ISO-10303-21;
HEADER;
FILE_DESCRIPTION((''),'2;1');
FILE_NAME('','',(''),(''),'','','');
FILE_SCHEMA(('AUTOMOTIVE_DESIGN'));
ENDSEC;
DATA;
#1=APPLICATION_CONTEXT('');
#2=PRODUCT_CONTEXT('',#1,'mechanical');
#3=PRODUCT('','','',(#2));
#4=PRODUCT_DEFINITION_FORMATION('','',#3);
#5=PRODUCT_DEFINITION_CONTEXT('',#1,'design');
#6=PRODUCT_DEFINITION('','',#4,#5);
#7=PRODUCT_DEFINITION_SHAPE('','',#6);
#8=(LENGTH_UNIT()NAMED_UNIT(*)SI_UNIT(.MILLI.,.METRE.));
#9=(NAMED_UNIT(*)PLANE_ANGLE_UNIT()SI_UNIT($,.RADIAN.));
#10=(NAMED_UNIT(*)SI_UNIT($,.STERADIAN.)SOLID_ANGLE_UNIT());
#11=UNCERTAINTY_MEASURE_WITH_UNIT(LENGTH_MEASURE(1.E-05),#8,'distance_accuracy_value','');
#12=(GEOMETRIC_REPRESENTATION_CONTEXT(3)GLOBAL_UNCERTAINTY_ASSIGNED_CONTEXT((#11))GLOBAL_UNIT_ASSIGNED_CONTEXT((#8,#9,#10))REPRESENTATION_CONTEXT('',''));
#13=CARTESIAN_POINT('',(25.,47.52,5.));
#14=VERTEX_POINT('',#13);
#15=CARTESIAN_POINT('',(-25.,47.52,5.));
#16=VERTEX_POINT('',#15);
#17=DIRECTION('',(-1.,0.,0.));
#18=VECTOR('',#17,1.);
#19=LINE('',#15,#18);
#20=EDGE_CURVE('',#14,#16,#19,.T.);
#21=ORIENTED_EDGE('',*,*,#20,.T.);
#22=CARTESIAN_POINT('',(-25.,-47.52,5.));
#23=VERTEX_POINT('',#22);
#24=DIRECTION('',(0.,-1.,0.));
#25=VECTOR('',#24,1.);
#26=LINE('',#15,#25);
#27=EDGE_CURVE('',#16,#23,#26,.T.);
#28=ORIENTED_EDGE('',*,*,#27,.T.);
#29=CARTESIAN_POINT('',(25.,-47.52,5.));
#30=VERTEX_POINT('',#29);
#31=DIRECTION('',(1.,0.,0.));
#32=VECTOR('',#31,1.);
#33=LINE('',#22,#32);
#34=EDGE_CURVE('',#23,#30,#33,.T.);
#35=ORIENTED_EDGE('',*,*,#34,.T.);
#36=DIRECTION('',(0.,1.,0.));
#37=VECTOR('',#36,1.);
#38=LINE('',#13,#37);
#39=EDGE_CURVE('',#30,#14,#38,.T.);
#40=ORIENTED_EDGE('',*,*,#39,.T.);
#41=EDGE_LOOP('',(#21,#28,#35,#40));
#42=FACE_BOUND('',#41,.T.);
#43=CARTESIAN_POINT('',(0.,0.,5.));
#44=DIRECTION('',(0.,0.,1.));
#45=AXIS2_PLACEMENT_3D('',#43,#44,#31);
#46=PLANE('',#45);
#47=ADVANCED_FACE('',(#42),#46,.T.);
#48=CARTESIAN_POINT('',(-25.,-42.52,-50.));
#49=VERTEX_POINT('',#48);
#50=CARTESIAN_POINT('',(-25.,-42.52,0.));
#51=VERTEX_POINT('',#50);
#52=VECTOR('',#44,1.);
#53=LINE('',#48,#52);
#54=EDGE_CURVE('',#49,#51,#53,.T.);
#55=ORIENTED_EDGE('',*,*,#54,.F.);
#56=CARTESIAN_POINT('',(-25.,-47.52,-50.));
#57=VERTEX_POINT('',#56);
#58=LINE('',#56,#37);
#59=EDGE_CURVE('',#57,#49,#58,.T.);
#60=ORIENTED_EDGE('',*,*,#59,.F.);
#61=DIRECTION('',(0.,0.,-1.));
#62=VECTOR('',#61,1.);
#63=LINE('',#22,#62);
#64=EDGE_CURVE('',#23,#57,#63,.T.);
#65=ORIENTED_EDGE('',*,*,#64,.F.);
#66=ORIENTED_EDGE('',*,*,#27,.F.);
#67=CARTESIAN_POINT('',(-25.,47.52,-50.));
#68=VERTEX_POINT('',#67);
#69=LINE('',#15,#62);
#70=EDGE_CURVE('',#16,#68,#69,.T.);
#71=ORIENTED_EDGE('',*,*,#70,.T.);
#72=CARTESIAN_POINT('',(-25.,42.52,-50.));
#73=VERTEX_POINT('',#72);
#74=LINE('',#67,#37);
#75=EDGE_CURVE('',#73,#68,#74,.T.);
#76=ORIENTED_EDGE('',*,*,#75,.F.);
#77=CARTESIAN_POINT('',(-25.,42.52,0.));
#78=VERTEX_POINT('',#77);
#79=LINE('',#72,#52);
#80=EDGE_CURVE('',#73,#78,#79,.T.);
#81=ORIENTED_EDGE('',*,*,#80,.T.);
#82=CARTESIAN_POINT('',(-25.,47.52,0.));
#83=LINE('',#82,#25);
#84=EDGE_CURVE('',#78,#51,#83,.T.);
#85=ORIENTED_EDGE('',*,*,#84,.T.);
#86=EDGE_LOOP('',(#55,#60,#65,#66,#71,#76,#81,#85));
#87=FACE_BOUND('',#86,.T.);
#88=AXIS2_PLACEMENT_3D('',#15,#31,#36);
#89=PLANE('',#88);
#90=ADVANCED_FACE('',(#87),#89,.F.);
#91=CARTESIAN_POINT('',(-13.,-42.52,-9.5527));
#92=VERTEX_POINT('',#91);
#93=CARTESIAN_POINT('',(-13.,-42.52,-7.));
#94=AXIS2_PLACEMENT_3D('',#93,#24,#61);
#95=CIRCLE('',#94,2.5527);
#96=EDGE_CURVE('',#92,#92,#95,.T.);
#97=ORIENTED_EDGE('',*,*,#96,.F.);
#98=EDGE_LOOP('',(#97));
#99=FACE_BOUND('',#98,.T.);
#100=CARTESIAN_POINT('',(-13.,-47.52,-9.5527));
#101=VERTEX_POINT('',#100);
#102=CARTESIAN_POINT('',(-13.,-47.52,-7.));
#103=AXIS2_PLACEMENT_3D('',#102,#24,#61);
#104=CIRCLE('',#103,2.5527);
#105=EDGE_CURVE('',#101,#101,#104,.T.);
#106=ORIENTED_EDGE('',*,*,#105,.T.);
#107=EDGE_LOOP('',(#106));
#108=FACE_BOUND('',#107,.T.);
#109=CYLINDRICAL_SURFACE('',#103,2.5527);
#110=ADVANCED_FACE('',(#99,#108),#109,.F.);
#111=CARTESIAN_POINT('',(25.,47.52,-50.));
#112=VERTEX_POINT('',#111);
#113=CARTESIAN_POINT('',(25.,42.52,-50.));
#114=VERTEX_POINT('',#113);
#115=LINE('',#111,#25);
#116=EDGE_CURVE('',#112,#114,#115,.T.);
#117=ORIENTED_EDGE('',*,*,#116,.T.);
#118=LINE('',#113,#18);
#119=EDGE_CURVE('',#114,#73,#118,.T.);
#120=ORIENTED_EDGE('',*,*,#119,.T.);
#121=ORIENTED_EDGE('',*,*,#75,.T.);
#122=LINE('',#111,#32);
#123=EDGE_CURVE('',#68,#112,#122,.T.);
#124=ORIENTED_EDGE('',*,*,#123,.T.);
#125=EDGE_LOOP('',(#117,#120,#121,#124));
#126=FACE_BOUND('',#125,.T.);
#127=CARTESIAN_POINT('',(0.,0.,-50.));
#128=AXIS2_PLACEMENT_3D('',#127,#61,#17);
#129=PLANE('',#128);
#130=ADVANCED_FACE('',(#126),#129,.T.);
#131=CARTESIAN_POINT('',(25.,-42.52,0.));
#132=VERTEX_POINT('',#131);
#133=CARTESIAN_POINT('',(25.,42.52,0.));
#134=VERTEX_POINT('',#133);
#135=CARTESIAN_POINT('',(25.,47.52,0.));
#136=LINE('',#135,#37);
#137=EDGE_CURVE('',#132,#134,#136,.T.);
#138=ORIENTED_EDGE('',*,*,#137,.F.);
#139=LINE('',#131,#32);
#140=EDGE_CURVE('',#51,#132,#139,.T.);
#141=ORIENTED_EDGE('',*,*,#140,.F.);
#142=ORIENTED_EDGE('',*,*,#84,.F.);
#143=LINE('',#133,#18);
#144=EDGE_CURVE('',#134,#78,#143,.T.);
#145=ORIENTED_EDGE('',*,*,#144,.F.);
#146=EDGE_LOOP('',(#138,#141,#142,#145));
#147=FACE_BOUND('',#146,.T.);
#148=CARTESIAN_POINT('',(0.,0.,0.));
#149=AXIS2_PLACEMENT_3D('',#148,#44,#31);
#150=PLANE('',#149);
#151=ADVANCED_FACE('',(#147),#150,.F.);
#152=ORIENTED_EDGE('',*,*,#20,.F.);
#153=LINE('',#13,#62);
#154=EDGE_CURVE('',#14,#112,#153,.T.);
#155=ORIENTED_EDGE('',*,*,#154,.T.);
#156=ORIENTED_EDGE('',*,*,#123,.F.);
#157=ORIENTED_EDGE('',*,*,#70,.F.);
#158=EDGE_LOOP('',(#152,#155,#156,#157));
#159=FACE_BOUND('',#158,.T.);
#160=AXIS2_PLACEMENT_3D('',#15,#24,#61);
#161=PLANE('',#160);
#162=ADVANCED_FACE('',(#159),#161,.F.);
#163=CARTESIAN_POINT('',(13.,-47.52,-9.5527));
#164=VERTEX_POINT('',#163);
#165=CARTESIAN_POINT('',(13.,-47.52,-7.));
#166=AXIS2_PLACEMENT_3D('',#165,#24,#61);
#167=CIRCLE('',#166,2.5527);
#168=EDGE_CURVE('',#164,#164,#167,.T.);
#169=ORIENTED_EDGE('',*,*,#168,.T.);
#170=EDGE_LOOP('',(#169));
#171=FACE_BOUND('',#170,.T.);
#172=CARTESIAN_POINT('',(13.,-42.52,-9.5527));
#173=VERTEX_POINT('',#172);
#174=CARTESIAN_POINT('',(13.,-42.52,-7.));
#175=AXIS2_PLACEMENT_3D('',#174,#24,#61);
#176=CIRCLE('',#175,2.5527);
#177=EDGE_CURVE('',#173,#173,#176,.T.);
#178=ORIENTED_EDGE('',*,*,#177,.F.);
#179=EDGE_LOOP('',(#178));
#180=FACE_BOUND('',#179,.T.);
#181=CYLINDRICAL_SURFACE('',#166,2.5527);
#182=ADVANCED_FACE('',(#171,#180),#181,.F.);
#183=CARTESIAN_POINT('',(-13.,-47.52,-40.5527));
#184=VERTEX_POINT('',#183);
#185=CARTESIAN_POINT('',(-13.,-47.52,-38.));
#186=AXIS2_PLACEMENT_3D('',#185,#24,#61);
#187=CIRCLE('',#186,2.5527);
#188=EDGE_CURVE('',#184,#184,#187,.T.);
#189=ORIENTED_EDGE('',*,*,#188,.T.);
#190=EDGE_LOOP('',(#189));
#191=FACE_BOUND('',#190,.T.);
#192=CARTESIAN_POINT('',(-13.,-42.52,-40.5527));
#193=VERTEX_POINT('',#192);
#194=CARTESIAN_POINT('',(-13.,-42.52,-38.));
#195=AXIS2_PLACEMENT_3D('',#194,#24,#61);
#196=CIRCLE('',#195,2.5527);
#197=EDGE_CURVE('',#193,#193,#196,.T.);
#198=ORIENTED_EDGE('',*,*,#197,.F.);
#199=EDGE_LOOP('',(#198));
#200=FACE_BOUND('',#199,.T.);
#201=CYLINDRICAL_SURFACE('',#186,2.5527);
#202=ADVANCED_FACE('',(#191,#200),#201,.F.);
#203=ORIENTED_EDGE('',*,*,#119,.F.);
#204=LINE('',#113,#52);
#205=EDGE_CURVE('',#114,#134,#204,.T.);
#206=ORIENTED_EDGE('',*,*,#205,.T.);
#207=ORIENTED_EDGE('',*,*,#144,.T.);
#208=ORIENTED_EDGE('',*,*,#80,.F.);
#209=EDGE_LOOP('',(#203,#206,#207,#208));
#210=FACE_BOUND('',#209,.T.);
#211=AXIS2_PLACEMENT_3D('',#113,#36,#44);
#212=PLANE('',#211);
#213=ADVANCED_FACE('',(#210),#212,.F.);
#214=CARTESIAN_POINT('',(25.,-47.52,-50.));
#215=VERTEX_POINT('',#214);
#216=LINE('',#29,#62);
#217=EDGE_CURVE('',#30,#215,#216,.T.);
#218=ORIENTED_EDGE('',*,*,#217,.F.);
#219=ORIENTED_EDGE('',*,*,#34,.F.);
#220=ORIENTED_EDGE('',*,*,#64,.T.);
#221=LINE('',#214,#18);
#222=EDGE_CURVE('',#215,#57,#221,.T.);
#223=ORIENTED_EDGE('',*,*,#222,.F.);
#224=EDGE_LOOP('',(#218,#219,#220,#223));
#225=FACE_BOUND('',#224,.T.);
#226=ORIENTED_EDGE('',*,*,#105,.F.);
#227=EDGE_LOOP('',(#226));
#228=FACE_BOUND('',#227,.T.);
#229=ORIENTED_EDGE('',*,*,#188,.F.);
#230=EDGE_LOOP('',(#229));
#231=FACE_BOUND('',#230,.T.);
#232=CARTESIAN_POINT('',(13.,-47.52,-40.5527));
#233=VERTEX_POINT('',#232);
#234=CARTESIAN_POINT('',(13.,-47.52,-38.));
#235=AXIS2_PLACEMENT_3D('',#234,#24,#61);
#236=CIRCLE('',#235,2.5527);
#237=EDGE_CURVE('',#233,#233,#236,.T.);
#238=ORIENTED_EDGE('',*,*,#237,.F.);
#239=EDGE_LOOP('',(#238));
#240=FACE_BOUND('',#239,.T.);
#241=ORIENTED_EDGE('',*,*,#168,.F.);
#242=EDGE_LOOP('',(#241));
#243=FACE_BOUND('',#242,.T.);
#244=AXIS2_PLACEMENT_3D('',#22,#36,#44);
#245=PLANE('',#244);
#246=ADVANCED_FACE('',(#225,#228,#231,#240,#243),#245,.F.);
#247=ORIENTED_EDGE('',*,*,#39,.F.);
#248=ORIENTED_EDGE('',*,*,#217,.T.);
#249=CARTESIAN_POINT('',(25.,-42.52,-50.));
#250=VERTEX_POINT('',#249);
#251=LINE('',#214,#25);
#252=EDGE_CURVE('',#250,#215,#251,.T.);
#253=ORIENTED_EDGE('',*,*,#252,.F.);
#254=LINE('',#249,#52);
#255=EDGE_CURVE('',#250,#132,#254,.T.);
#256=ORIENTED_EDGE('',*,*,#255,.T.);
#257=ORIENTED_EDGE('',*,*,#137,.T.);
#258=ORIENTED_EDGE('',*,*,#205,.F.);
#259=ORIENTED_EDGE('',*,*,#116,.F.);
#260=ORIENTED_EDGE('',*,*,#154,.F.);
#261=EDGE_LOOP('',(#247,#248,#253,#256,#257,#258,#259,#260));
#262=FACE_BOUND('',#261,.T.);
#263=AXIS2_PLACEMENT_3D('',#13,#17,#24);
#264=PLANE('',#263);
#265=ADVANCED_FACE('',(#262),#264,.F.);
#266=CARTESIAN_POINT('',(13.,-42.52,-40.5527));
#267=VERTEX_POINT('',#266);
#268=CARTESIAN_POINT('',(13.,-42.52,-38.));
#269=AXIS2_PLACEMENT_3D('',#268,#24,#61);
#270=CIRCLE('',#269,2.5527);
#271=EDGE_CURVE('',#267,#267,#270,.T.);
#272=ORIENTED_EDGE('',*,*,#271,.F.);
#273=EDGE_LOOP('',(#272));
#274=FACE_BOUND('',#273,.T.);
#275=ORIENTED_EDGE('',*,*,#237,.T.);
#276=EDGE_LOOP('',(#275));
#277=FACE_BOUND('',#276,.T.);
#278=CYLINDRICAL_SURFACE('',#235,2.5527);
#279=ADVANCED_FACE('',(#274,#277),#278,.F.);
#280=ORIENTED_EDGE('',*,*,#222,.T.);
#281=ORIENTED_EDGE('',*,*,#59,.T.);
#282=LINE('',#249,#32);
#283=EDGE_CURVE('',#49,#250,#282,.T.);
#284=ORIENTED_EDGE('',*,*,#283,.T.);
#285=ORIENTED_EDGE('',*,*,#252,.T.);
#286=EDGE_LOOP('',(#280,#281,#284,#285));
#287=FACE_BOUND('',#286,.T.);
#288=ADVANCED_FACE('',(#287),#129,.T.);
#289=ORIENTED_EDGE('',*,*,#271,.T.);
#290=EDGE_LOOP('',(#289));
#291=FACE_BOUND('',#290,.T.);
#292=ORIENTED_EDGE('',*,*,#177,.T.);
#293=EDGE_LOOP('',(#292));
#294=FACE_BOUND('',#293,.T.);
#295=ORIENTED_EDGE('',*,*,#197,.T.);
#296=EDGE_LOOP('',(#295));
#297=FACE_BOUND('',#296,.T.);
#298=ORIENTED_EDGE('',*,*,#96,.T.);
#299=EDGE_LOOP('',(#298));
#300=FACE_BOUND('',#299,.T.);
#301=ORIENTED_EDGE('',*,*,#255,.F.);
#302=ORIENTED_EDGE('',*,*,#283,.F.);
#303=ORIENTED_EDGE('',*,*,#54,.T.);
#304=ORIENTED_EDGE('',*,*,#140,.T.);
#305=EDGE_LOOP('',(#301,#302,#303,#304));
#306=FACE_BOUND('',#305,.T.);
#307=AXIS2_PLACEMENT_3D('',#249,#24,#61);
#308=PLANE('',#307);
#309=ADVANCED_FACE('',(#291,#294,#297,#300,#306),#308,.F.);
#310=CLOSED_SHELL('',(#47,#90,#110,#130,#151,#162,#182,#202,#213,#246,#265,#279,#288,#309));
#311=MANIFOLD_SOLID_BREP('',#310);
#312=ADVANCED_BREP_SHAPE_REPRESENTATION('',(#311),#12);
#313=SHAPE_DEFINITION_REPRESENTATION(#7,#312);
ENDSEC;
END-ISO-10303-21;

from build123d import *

# Parameters (mm, degrees)
SKETCH_1_W                     = 50
SKETCH_1_H                     = 95.04
EXTRUDE_1_DEPTH                = 5
SKETCH_2_W                     = 50
SKETCH_2_H                     = 5
EXTRUDE_2_DEPTH                = 50
HOLE_START                     = -47.52
HOLE_WIZARD_1_4_20_3_OUTLINE_R = 2.5527
HOLE_WIZARD_1_4_20_3_DEPTH     = 5


# Read off the part's stored shape, not the designer's step: 1/4-20 螺纹孔3
with BuildPart() as part:
    # 草图1 → 凸台-拉伸1 (new body)
    with BuildSketch(Plane.XY):
        Rectangle(SKETCH_1_W, SKETCH_1_H)
    extrude(amount=EXTRUDE_1_DEPTH)

    # 草图2 → 凸台-拉伸2 (add)
    with BuildSketch(Plane(origin=(0, 0, 0), x_dir=(-1, 0, 0), z_dir=(0, 0, -1))):
        with Locations((0, 45.02)):
            Rectangle(SKETCH_2_W, SKETCH_2_H)
        with Locations((0, -45.02)):
            Rectangle(SKETCH_2_W, SKETCH_2_H)
    extrude(amount=EXTRUDE_2_DEPTH)

    # 1/4-20 螺纹孔3 outline → 1/4-20 螺纹孔3 (cut)
    with BuildSketch(Plane(origin=(0, 0, 0), x_dir=(1, 0, 0), z_dir=(0, 1, 0)).offset(HOLE_START)):
        with Locations((13, 7)):
            Circle(HOLE_WIZARD_1_4_20_3_OUTLINE_R)
        with Locations((13, 38)):
            Circle(HOLE_WIZARD_1_4_20_3_OUTLINE_R)
        with Locations((-13, 38)):
            Circle(HOLE_WIZARD_1_4_20_3_OUTLINE_R)
        with Locations((-13, 7)):
            Circle(HOLE_WIZARD_1_4_20_3_OUTLINE_R)
    extrude(amount=HOLE_WIZARD_1_4_20_3_DEPTH, mode=Mode.SUBTRACT)


solid = part.part
